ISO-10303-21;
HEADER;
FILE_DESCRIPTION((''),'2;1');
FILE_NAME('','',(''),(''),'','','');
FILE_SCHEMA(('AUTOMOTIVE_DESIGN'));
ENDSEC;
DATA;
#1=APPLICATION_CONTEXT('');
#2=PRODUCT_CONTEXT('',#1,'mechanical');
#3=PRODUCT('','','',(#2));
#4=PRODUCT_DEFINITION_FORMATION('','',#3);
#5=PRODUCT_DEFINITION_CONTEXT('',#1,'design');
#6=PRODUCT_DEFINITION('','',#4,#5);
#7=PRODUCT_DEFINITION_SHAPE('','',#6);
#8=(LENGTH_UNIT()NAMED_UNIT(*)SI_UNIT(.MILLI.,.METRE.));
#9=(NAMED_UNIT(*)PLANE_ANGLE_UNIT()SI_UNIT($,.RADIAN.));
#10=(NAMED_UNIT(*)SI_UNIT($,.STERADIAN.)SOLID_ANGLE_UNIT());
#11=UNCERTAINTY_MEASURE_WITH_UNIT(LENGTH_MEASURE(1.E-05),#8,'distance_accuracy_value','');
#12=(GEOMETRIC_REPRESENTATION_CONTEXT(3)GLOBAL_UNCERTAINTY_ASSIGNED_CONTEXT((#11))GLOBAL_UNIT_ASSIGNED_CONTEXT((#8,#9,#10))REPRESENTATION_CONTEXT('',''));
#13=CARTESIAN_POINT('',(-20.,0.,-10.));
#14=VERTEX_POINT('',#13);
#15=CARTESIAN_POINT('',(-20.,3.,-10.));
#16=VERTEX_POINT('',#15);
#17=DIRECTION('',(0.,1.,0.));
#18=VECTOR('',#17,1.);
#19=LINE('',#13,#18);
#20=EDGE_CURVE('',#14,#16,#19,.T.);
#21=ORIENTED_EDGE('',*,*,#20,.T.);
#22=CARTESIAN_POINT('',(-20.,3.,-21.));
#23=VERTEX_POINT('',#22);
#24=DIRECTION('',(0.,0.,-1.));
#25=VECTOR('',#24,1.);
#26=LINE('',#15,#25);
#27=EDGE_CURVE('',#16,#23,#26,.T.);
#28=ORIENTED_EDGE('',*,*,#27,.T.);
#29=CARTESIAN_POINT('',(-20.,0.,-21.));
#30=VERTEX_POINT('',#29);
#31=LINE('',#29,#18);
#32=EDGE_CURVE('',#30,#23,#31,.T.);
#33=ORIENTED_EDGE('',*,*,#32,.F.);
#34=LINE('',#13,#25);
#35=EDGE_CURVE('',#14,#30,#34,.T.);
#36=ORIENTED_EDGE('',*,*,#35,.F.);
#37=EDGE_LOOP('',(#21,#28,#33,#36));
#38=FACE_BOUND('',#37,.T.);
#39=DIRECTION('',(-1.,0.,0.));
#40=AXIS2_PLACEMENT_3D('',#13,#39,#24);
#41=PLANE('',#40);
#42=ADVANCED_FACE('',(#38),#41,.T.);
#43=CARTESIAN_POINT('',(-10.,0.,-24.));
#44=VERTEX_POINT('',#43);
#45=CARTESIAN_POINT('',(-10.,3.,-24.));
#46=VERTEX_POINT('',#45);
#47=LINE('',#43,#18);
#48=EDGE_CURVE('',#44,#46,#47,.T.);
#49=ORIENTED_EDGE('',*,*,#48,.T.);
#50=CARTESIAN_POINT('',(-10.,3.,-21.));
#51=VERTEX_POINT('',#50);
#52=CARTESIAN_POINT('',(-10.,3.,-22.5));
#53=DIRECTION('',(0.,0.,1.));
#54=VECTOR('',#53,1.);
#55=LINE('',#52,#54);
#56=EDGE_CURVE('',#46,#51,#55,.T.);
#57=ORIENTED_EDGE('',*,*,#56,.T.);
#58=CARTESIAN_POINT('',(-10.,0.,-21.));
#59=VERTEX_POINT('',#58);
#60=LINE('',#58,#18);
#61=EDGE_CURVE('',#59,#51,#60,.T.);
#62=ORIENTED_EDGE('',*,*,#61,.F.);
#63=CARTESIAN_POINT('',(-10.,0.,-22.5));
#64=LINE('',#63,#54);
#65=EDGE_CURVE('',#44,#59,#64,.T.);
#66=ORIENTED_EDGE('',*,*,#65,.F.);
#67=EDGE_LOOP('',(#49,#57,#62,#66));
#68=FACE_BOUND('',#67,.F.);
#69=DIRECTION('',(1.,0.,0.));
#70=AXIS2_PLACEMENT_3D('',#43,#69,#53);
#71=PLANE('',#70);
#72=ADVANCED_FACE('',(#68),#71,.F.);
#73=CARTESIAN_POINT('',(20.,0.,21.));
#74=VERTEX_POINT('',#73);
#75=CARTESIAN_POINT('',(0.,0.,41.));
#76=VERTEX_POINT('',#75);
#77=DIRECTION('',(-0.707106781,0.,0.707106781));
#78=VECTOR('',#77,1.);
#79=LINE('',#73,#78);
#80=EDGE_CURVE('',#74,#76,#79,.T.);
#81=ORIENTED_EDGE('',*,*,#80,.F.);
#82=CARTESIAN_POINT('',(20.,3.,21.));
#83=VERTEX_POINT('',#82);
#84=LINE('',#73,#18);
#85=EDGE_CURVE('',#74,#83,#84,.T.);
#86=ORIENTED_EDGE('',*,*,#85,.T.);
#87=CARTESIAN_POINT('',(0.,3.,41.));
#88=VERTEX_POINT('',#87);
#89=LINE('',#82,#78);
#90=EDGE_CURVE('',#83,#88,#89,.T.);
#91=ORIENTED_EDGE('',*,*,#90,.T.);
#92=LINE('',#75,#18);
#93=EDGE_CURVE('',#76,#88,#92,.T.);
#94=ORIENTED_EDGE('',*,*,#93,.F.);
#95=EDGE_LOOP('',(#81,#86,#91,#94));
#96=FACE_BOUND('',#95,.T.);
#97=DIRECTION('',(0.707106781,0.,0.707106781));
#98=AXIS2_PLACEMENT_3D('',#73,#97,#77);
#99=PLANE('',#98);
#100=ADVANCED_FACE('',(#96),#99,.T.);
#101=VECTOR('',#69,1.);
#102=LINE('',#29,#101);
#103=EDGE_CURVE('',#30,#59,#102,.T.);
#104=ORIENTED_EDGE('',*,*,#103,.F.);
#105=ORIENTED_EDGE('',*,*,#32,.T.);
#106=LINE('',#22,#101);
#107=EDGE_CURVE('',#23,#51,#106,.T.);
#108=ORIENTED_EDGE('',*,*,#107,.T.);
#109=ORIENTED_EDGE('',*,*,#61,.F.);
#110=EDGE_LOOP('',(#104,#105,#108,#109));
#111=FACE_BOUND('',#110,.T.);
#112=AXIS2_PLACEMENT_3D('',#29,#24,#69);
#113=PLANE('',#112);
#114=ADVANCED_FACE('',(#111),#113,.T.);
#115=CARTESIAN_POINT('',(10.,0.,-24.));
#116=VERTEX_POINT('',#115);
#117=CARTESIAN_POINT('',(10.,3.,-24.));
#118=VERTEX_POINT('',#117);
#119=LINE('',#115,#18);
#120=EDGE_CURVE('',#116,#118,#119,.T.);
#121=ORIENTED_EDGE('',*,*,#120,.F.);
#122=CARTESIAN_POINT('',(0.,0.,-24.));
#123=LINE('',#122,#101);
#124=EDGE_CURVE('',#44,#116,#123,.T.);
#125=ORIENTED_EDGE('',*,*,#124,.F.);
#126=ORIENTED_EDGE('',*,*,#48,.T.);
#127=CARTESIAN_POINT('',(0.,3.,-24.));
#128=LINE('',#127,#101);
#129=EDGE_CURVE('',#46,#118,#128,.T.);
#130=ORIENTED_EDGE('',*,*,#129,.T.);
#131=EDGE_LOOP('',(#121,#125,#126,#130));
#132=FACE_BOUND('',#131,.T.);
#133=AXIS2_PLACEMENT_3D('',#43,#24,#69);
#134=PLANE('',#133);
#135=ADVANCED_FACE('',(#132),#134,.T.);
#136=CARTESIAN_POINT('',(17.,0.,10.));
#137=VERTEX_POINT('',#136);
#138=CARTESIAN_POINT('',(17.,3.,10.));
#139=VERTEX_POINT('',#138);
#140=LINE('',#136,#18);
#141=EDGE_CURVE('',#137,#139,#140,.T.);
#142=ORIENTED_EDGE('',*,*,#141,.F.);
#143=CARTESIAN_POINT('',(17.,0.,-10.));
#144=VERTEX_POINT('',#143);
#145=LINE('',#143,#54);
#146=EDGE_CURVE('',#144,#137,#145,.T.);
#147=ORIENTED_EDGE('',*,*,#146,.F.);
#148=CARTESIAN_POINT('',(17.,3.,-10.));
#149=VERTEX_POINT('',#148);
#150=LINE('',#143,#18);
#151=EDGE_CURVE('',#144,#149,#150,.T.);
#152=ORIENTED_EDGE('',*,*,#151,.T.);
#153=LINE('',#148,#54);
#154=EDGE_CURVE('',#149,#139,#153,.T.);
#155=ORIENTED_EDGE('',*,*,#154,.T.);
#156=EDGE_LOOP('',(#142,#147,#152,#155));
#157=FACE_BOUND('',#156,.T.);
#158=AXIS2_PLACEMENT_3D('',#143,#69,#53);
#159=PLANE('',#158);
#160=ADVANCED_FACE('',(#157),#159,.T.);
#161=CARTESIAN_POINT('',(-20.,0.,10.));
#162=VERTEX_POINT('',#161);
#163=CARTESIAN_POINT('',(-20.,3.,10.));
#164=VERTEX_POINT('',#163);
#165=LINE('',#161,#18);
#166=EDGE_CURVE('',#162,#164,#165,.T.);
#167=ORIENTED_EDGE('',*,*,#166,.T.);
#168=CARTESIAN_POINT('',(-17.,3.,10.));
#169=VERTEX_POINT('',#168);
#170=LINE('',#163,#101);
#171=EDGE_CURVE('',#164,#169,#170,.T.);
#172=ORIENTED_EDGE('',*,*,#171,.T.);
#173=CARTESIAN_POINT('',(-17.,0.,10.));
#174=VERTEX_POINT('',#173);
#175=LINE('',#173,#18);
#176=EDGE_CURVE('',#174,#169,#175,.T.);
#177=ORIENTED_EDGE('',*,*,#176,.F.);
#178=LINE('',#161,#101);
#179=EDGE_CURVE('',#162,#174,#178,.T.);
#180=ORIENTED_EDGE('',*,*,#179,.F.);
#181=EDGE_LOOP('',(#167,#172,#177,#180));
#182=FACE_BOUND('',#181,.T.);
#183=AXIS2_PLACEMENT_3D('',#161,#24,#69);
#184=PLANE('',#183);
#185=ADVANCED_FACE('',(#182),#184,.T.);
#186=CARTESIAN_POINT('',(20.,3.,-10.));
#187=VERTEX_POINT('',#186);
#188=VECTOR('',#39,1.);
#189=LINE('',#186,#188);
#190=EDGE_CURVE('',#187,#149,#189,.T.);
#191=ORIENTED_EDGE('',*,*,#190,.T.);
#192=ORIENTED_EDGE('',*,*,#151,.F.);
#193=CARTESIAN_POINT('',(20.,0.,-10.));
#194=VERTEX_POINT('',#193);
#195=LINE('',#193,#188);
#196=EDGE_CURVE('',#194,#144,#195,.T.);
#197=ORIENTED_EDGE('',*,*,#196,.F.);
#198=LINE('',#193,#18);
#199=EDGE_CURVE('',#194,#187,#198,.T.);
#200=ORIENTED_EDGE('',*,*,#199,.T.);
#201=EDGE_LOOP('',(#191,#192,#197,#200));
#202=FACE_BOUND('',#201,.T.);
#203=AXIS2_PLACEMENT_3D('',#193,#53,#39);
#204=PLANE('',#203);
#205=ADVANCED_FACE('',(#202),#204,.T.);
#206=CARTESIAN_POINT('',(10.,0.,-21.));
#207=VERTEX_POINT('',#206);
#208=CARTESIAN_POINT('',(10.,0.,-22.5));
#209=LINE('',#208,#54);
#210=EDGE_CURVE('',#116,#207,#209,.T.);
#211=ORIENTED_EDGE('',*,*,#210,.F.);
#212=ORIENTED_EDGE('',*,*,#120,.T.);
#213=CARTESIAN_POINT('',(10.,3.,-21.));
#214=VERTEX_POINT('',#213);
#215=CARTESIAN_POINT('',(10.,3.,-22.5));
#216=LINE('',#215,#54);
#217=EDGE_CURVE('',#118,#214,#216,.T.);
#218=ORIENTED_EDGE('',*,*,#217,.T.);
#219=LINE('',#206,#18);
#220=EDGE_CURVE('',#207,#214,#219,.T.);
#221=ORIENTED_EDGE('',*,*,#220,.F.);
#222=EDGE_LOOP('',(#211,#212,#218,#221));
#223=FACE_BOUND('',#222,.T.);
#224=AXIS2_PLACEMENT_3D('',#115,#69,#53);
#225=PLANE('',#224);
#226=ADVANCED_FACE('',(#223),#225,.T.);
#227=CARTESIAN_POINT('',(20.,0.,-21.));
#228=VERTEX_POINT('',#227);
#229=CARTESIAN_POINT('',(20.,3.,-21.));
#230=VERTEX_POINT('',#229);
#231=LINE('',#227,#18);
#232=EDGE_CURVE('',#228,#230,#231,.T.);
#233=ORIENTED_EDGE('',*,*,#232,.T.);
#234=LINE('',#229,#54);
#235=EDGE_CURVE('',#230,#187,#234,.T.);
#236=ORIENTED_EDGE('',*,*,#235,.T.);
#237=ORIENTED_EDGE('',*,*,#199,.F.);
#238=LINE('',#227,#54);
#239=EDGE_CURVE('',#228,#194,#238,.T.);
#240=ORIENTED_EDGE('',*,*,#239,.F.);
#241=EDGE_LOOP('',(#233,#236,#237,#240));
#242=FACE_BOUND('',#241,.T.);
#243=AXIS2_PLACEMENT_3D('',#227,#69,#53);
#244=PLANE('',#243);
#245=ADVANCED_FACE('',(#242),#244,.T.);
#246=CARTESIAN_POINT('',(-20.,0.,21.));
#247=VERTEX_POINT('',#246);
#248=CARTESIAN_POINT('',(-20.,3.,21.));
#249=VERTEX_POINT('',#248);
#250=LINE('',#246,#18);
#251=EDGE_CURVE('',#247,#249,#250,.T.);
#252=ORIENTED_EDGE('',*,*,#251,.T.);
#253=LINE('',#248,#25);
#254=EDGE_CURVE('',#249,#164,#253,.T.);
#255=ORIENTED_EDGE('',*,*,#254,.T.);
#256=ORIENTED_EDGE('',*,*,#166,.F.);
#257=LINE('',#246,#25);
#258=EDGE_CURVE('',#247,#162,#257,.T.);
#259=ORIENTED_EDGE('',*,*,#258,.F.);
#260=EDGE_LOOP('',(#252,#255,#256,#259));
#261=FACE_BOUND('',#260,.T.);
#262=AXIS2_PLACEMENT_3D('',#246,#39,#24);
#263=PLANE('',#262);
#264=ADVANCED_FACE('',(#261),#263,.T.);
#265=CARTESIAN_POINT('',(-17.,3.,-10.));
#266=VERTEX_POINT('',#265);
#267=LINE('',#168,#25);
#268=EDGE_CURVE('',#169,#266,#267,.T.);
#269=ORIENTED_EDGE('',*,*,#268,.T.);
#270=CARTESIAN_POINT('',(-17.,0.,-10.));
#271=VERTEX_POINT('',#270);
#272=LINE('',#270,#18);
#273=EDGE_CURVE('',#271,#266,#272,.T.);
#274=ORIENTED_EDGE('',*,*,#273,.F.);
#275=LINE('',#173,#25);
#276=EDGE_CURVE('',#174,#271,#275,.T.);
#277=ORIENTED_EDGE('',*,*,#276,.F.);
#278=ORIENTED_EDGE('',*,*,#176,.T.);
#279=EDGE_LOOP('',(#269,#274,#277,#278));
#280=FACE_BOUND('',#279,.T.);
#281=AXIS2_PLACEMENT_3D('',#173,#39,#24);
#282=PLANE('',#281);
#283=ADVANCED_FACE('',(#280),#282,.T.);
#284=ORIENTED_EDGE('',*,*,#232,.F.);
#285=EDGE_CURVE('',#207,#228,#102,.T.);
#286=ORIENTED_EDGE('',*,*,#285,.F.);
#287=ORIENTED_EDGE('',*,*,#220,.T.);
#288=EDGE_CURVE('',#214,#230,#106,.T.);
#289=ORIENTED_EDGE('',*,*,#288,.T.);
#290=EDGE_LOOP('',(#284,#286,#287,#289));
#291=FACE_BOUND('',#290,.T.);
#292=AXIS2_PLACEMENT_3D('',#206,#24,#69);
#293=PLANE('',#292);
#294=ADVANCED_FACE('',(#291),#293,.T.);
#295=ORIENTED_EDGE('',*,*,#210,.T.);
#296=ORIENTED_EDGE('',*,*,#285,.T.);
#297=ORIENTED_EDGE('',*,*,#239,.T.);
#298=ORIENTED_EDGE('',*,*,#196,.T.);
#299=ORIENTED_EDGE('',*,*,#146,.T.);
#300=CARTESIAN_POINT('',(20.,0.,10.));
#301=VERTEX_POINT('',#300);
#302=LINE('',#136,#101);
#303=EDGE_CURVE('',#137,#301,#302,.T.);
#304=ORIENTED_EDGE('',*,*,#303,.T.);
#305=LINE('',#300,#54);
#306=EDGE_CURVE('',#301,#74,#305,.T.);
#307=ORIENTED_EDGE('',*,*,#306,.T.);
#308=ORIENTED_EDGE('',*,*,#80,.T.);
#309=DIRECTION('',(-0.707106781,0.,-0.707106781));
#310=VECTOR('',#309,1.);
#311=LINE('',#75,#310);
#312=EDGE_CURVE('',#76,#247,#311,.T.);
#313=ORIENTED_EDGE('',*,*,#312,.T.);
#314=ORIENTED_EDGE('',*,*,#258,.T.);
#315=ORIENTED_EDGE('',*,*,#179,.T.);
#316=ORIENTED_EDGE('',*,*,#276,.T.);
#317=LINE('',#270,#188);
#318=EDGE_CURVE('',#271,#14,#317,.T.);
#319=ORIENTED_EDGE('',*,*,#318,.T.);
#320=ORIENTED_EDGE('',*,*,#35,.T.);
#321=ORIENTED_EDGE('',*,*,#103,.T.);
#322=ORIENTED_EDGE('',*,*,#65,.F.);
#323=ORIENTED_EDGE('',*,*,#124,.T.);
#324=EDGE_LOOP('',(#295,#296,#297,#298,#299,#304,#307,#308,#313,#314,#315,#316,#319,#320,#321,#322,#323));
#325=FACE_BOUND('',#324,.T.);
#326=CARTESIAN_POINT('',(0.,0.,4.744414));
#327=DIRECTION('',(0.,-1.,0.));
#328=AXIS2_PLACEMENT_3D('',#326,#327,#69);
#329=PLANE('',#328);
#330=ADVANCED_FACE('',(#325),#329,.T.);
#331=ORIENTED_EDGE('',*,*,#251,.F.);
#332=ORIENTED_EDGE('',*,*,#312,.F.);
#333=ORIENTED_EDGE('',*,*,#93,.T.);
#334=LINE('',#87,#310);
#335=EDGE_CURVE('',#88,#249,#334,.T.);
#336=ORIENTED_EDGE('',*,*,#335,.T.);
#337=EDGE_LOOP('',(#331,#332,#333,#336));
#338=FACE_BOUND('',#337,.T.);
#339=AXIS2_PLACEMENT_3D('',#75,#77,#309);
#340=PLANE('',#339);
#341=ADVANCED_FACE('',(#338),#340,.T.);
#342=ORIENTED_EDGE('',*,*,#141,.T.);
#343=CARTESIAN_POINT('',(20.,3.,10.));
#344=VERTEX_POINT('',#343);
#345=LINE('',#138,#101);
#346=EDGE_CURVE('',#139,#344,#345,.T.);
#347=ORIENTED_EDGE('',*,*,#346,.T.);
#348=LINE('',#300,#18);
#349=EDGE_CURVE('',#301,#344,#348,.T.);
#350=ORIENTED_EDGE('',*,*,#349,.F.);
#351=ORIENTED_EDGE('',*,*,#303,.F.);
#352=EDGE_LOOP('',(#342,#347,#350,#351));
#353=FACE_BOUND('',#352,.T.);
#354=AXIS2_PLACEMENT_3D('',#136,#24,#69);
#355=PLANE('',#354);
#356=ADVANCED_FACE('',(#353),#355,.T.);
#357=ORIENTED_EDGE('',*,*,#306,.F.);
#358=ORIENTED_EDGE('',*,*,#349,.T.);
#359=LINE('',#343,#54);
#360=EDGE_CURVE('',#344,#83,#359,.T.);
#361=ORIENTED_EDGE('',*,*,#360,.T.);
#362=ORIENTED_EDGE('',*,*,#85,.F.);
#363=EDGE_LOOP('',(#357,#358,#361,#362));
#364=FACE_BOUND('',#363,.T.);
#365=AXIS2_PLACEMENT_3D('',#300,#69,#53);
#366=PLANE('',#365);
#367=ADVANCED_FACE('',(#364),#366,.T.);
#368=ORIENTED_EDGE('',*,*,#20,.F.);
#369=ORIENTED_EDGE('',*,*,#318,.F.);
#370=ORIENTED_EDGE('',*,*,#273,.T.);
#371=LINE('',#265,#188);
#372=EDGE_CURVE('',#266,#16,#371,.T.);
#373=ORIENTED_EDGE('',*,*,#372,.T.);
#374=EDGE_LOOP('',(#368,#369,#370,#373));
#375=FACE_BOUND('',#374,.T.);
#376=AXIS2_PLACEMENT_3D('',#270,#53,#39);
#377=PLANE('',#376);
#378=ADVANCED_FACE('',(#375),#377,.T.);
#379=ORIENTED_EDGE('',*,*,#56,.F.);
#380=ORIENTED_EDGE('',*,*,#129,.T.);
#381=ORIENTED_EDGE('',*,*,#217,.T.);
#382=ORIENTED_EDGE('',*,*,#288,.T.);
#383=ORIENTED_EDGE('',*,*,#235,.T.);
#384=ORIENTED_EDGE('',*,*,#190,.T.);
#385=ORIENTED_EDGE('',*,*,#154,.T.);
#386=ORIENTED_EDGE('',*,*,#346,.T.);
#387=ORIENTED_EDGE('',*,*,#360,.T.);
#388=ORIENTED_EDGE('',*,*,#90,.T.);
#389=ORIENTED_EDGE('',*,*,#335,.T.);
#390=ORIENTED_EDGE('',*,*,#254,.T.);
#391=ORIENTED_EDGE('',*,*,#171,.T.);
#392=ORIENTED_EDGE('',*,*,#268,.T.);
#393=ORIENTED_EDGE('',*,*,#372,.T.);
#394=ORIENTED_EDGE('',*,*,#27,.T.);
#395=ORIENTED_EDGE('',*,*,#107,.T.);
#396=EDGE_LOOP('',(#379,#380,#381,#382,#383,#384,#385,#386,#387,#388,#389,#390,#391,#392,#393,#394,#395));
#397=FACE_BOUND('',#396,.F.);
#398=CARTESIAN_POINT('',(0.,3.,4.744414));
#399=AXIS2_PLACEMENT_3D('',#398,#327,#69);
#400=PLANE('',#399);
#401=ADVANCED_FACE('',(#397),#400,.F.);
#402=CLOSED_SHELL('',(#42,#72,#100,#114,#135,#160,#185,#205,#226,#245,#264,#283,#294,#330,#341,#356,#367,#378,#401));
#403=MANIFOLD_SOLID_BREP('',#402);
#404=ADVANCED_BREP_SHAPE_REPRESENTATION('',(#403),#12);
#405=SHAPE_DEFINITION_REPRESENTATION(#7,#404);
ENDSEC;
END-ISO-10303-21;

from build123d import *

# Parameters (mm, degrees)
F0_W     = 20
F0_H     = 3
F1_DEPTH = 3


# Not quite as in the source:
# - a feature names something its author has since deleted; it is built from what else it names


with BuildPart() as f1:
    # F0 (on Front) → F1 (new body)
    with BuildSketch(Plane.XZ):
        Polygon((10, -21), (20, -21), (20, -10), (17, -10), (17, 10), (20, 10), (20, 21), (0, 41), (-20, 21), (-20, 10), (-17, 10), (-17, -10), (-20, -10), (-20, -21), (-10, -21), align=None)
        with Locations((0, -22.5)):
            Rectangle(F0_W, F0_H)
    extrude(amount=-F1_DEPTH)


solid = f1.part
